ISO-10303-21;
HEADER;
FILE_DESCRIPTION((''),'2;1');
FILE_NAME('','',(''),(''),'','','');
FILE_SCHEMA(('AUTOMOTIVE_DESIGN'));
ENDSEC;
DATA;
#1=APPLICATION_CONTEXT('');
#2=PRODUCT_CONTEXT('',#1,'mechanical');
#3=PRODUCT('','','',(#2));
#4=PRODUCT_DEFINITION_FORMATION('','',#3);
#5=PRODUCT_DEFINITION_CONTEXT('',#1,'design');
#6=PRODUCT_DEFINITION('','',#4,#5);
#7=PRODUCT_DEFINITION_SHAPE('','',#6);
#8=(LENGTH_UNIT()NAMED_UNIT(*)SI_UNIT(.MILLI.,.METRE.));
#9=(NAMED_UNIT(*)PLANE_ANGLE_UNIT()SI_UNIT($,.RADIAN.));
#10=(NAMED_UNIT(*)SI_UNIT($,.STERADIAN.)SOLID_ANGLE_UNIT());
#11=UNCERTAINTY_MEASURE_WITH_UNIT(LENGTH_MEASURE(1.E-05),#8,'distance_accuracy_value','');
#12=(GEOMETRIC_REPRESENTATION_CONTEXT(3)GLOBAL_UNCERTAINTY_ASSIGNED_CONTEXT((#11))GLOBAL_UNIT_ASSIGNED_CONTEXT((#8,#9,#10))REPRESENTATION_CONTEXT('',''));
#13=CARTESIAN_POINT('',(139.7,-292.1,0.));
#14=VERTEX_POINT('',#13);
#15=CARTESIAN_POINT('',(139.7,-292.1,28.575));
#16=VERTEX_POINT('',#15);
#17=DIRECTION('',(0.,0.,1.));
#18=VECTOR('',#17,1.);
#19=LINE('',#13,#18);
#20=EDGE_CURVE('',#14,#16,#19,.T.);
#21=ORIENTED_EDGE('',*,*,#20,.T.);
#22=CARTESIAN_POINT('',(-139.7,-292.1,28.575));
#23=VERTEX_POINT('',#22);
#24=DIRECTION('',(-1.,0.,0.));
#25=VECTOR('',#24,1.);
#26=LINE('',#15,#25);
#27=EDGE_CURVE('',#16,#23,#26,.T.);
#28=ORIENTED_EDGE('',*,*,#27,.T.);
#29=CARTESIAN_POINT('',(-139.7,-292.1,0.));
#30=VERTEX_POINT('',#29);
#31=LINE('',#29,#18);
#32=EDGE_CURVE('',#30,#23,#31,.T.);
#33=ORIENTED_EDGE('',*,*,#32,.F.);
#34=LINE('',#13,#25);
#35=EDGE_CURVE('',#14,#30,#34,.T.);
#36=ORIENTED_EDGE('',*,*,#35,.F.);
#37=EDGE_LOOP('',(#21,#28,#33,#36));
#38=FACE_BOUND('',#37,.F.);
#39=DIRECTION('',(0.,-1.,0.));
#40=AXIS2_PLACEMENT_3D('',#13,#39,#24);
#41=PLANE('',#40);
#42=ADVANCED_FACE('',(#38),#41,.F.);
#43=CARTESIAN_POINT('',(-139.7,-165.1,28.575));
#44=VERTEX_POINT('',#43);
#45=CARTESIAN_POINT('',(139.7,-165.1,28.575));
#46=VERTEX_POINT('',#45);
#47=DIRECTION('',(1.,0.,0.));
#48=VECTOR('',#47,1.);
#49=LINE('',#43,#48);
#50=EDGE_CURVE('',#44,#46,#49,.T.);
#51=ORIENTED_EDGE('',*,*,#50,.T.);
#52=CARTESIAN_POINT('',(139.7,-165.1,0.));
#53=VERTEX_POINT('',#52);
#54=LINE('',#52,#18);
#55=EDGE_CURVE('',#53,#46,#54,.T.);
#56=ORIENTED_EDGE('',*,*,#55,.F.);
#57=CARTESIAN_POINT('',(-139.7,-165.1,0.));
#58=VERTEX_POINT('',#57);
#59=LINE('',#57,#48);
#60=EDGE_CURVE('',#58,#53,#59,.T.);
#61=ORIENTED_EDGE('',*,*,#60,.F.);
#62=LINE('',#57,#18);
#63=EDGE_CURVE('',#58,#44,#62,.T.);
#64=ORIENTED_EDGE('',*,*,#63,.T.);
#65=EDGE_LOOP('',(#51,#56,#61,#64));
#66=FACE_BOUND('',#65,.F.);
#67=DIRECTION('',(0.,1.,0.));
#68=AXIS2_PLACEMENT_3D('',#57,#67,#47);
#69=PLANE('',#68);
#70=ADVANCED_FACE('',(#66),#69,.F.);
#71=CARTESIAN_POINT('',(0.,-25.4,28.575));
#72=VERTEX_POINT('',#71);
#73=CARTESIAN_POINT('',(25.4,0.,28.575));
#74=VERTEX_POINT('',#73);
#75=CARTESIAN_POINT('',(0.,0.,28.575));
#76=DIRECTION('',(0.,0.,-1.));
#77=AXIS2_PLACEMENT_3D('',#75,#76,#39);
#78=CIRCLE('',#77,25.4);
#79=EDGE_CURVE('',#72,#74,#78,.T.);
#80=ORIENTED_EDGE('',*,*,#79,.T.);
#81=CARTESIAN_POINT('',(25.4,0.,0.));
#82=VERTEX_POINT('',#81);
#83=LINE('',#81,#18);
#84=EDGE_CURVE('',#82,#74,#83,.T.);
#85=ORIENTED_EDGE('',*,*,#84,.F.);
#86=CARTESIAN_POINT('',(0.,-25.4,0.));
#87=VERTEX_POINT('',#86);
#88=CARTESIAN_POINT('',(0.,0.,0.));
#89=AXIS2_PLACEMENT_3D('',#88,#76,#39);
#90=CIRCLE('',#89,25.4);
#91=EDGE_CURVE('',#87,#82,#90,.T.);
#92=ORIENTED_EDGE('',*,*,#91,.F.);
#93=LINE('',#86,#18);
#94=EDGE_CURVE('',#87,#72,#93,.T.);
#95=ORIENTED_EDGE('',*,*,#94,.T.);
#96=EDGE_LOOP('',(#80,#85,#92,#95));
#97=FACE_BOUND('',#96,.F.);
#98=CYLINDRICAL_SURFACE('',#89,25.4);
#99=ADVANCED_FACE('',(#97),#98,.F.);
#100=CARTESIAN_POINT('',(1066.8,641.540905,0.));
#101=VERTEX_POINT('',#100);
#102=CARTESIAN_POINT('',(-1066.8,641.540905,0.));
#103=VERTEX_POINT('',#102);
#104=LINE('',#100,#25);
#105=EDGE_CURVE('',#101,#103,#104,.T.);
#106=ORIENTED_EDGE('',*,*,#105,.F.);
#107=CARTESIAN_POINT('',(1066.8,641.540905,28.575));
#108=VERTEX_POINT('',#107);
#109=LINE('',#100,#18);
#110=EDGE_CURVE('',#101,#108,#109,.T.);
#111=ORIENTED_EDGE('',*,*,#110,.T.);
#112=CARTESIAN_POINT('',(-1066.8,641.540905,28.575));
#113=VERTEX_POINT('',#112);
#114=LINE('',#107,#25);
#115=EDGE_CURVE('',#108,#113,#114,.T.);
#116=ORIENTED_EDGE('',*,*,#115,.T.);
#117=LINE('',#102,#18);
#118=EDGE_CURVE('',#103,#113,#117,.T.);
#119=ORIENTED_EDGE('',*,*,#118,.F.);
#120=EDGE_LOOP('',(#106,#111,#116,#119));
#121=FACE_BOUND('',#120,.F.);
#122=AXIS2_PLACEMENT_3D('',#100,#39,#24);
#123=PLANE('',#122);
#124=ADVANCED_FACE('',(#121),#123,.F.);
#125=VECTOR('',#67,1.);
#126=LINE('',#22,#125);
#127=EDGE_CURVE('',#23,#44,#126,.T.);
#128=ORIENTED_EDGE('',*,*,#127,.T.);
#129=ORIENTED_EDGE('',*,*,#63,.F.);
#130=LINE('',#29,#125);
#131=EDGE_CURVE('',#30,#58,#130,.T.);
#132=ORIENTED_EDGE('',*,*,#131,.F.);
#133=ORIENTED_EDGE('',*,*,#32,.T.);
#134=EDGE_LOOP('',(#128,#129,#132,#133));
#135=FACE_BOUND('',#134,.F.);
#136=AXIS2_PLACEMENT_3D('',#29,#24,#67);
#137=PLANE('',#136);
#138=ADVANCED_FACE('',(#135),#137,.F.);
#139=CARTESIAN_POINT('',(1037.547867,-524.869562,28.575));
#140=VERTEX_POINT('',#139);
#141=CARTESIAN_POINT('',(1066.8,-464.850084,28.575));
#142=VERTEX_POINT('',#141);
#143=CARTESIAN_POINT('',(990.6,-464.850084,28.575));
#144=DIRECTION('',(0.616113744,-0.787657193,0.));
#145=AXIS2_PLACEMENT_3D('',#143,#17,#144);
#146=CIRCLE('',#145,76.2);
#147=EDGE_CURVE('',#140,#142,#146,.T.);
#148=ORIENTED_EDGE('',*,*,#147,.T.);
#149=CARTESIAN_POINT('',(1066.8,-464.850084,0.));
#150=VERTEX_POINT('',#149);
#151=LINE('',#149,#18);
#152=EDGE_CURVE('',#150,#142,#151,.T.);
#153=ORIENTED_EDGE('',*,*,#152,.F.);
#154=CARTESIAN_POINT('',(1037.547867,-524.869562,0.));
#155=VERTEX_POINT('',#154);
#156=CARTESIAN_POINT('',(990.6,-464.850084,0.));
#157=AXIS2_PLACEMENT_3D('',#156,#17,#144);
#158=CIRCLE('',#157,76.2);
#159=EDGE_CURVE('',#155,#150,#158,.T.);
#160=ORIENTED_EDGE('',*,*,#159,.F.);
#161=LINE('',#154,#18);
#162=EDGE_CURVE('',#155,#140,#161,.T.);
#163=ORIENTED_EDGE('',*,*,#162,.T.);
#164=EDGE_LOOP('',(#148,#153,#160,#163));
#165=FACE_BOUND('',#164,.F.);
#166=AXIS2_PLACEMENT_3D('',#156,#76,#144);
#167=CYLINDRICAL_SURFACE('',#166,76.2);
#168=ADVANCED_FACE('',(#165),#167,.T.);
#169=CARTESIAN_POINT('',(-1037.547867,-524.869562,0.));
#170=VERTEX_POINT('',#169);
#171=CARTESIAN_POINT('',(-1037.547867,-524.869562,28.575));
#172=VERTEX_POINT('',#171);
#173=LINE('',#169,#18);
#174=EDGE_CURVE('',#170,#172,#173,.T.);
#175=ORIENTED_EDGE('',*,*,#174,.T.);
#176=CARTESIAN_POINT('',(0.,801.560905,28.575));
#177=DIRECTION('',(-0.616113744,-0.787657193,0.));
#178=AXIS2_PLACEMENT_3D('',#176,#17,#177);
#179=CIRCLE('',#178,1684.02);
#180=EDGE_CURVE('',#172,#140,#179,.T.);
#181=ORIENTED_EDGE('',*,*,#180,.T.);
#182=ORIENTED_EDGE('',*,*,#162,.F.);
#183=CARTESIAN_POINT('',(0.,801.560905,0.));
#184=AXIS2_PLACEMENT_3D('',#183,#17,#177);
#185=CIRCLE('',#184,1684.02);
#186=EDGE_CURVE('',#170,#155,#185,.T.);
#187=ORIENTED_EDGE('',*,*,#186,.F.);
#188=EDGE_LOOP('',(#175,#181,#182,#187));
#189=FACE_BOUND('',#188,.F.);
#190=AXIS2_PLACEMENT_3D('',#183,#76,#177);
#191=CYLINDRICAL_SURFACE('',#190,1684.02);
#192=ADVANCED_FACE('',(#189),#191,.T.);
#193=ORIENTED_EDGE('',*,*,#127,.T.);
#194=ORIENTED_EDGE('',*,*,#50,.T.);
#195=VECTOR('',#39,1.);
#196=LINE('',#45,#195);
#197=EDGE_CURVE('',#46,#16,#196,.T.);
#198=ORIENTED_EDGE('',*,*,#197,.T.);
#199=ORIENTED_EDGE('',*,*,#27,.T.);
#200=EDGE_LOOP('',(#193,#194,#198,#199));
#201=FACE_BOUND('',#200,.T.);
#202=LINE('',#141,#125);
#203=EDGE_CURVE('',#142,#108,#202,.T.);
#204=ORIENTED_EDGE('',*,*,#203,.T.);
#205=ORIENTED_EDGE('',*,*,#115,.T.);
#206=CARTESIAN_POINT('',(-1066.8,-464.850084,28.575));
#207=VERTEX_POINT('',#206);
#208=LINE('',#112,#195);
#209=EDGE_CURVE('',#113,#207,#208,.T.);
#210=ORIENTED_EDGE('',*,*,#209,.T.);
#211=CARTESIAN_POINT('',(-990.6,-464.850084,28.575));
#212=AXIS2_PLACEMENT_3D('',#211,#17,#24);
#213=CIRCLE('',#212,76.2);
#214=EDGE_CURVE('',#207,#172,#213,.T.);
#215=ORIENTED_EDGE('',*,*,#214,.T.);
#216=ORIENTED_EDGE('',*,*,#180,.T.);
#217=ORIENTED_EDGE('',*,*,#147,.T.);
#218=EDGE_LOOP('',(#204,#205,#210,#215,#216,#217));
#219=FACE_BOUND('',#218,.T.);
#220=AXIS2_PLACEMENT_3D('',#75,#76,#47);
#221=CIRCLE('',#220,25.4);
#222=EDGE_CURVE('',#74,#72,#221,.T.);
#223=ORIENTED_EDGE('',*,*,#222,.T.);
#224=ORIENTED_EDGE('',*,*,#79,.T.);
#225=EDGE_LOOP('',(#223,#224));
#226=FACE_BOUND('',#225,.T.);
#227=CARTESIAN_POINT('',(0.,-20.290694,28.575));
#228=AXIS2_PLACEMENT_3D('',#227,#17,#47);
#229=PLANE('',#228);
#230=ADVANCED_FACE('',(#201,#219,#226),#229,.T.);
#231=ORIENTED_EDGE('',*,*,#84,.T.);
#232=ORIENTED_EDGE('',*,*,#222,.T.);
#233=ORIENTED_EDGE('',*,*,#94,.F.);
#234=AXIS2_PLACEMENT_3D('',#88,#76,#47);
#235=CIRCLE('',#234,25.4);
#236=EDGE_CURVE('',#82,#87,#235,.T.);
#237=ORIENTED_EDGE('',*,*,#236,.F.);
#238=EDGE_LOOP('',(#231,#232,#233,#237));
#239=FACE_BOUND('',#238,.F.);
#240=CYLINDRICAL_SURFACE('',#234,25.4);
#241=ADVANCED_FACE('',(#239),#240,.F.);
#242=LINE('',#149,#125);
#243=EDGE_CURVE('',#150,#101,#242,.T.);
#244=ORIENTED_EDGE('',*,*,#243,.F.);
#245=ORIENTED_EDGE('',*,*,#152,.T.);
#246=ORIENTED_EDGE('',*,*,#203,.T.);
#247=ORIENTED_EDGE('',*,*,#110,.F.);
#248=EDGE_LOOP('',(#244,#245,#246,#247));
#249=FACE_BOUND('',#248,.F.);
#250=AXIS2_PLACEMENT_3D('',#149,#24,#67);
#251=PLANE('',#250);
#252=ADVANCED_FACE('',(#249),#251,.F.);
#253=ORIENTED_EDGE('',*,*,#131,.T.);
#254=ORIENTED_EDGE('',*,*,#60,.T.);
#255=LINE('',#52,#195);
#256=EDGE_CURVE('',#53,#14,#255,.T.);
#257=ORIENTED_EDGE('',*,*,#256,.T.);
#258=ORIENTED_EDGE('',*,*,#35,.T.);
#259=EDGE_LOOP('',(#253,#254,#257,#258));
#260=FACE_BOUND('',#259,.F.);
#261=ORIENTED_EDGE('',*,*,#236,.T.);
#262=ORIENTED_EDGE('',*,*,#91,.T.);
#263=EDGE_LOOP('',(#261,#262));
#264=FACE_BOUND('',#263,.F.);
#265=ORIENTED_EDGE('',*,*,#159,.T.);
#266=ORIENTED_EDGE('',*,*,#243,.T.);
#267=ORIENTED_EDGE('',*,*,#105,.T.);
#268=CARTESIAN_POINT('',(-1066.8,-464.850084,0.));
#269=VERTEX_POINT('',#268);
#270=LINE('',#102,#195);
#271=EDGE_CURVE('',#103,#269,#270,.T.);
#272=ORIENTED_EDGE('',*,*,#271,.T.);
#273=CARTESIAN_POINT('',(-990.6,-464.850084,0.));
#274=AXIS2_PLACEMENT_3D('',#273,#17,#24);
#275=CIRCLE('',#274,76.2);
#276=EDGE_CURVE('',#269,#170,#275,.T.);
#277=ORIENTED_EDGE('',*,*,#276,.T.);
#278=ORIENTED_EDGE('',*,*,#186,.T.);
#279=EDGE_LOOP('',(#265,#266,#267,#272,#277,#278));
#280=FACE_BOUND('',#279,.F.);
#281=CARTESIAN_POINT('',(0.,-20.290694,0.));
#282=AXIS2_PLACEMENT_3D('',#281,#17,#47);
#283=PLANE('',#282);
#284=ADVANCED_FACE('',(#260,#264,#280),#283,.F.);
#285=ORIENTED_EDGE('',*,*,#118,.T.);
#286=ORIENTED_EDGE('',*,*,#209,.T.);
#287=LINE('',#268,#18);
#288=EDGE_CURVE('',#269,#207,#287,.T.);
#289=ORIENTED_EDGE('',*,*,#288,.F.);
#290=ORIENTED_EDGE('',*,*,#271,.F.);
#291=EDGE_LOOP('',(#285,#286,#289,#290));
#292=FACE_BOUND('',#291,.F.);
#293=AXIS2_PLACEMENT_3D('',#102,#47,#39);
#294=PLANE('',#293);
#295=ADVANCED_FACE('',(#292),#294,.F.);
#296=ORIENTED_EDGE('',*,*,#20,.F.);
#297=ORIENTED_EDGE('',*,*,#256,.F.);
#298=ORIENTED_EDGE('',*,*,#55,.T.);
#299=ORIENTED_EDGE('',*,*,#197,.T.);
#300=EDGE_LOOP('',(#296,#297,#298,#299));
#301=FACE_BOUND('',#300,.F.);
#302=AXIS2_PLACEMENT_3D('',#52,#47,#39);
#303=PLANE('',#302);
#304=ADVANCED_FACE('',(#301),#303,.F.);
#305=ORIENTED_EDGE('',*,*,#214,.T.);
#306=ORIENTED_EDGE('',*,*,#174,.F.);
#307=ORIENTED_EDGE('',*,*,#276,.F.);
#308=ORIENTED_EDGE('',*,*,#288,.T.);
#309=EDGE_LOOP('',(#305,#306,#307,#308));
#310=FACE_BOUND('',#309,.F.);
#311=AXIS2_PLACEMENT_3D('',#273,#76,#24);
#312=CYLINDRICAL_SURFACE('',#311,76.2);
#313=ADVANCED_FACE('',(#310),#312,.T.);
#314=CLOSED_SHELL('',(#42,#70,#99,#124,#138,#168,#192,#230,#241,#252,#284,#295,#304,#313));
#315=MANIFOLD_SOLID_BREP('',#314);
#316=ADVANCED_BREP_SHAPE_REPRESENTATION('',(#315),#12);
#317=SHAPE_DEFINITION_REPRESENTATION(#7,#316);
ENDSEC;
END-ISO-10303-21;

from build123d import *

# Parameters (mm, degrees)
F1_DEPTH = 28.575


# Not quite as in the source:
# - a feature names something its author has since deleted; it is built from what else it names


with BuildPart() as f1:
    # F0 (on Top) → F1 (new body)
    with BuildSketch(Plane.XY):
        with BuildLine():
            ThreePointArc((-1037.5478672986, -524.8695620945), (-548.7202955818, -790.5538516378), (0, -882.4590952158))
            ThreePointArc((0, -882.4590952158), (548.7202955818, -790.5538516378), (1037.5478672986, -524.8695620945))
            ThreePointArc((1037.5478672986, -524.8695620945), (1059.0976915237, -498.2343056164), (1066.8, -464.8500839552))
            Line((1066.8, -464.8500839552), (1066.8, -44.2590952158))
            Line((1066.8, -44.2590952158), (1066.8, 641.5409047842))
            Line((1066.8, 641.5409047842), (-1066.8, 641.5409047842))
            Line((-1066.8, 641.5409047842), (-1066.8, -44.2590952158))
            Line((-1066.8, -44.2590952158), (-1066.8, -464.8500839552))
            ThreePointArc((-1066.8, -464.8500839552), (-1059.0976915237, -498.2343056164), (-1037.5478672986, -524.8695620945))
        make_face()
        Polygon((-139.7, -165.1), (0, -165.1), (139.7, -165.1), (139.7, -292.1), (0, -292.1), (-139.7, -292.1), align=None, mode=Mode.SUBTRACT)
        with BuildLine():
            ThreePointArc((0, -25.4), (-17.9605122421, 17.9605122421), (25.4, 0))
            ThreePointArc((25.4, 0), (17.9605122421, -17.9605122421), (0, -25.4))
        make_face(mode=Mode.SUBTRACT)
    extrude(amount=F1_DEPTH)


solid = f1.part
